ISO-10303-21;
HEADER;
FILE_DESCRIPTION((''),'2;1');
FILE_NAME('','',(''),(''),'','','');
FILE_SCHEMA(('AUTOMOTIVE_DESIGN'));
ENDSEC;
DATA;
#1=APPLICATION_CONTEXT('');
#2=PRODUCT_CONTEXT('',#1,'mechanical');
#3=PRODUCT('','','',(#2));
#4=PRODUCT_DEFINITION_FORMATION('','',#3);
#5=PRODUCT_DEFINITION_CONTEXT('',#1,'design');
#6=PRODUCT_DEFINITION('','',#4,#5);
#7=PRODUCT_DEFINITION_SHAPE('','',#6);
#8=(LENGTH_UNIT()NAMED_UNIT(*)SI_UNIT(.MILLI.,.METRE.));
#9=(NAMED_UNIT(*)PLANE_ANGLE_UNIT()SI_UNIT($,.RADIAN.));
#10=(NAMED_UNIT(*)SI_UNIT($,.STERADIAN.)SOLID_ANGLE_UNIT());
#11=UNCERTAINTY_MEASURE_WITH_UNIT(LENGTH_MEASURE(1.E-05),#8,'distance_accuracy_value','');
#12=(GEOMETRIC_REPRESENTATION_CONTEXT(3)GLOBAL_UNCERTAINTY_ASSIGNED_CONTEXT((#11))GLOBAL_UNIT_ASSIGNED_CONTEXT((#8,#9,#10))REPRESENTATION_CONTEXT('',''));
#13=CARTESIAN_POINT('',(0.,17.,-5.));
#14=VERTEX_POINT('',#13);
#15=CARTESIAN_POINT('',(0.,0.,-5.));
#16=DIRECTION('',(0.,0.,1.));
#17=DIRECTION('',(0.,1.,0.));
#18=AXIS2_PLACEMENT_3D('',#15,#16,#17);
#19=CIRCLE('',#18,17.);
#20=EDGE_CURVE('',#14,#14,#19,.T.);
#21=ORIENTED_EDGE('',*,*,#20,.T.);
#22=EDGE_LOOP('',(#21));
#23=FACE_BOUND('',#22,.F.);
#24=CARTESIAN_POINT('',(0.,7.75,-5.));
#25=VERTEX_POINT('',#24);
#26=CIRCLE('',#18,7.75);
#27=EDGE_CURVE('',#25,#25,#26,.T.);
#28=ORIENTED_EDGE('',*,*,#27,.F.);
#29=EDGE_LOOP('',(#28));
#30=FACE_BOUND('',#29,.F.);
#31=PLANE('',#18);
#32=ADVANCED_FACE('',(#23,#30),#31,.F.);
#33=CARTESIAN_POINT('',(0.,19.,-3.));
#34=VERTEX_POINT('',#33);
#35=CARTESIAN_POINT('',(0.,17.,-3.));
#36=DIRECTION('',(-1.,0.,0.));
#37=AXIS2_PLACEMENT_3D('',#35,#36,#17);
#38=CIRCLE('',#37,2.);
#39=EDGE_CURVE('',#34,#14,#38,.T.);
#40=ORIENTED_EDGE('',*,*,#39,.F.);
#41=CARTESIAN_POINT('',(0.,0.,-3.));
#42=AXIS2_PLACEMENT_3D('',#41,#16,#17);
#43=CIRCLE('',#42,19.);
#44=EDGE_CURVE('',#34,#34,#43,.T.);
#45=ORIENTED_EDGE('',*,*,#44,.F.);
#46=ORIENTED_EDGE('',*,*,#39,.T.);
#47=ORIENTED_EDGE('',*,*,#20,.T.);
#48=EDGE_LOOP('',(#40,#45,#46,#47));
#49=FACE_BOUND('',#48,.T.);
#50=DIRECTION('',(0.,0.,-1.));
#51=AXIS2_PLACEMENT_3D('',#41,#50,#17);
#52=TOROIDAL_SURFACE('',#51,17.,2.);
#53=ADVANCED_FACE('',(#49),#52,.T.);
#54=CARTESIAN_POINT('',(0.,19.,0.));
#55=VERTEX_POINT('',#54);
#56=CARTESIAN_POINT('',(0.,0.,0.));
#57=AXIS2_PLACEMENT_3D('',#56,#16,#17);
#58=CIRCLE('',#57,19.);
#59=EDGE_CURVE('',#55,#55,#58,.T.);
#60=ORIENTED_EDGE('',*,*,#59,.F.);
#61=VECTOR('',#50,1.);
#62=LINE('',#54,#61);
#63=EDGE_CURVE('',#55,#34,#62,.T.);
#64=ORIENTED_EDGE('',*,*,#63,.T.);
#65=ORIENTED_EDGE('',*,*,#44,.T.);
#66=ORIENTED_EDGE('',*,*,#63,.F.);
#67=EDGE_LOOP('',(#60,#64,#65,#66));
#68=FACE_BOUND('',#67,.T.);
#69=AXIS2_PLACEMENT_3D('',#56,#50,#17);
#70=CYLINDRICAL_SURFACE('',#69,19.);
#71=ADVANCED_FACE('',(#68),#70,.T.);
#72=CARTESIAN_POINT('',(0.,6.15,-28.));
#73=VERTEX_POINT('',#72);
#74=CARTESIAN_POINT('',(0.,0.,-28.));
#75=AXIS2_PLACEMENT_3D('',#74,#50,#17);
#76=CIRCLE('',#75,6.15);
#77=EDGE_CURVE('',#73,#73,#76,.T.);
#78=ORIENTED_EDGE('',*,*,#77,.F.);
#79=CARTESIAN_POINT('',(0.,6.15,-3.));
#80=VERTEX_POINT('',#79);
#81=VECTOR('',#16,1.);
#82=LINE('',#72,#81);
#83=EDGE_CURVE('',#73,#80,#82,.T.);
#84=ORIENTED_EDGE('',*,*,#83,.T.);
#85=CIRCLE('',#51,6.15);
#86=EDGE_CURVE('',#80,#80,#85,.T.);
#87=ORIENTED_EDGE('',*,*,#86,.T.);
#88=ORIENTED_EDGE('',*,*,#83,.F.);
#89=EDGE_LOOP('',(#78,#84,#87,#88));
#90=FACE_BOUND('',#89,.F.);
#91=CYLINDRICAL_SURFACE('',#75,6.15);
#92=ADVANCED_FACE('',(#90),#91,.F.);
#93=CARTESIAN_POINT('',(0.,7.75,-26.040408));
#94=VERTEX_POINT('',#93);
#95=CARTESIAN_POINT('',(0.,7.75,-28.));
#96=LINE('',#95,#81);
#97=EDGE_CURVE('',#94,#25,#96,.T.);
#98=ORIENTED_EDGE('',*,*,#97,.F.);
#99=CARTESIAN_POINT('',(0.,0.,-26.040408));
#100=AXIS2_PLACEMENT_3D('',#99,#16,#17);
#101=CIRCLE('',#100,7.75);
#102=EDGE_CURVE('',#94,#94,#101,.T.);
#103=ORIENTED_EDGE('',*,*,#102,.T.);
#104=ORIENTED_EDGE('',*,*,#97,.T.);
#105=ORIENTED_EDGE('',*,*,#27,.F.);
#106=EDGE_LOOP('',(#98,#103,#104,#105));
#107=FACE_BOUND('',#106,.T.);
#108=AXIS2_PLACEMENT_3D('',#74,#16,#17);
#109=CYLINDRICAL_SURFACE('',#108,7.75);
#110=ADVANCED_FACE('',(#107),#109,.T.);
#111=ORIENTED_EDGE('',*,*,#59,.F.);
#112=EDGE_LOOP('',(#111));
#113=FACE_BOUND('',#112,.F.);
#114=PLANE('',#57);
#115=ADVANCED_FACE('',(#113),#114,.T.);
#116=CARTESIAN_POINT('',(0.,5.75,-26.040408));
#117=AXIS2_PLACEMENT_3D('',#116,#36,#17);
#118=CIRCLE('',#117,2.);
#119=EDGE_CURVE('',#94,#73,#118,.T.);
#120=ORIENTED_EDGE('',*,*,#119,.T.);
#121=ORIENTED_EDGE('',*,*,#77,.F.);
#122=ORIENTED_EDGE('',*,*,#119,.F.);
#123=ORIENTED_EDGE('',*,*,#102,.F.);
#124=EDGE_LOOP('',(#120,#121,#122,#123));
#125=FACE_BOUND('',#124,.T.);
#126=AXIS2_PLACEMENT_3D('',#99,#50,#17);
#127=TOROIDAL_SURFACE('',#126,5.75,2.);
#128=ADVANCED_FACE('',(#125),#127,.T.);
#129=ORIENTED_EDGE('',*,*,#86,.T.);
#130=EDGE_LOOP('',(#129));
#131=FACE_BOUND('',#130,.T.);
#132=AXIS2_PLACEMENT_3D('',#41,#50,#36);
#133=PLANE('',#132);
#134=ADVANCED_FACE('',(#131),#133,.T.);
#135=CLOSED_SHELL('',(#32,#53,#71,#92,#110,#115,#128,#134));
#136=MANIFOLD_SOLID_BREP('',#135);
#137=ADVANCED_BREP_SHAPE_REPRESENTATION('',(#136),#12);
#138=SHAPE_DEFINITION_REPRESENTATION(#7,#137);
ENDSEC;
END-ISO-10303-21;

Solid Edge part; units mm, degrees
sketch "Sketch1" plane through (0, 0, 0) normal (1, 0, 0) x (0, 1, 0)
  line L0 (0, 0) -> (19, 0)
  line L1 (19, 0) -> (19, -3)
  arc A0 (19, -3) -> (17, -5) centre (17, -3) cw
  line L2 (17, -5) -> (7.75, -5)
  line L3 (7.75, -28) -> (7.75, -5)
  line L4 (7.75, -28) -> (0, -28)
  line L5 (0, 0) -> (0, -28)
revolve "RevolvedProtrusion1" add sketch "Sketch1" angle 360 about axis through (0, 0, 0) along (0, 0, 1)
sketch "Sketch2" plane through (0, 0, -28) normal (0, 0, -1) x (0, 1, 0)
  circle A0 centre (0, 0) radius 6.15
extrude "Cutout1" cut sketch "Sketch2" against normal blind 25
fillet "Lekerekítés_1" radius 2 1 edges at (-7.75, 0, -28)
properties material "Polipropilén, általános rendeltetésű"
